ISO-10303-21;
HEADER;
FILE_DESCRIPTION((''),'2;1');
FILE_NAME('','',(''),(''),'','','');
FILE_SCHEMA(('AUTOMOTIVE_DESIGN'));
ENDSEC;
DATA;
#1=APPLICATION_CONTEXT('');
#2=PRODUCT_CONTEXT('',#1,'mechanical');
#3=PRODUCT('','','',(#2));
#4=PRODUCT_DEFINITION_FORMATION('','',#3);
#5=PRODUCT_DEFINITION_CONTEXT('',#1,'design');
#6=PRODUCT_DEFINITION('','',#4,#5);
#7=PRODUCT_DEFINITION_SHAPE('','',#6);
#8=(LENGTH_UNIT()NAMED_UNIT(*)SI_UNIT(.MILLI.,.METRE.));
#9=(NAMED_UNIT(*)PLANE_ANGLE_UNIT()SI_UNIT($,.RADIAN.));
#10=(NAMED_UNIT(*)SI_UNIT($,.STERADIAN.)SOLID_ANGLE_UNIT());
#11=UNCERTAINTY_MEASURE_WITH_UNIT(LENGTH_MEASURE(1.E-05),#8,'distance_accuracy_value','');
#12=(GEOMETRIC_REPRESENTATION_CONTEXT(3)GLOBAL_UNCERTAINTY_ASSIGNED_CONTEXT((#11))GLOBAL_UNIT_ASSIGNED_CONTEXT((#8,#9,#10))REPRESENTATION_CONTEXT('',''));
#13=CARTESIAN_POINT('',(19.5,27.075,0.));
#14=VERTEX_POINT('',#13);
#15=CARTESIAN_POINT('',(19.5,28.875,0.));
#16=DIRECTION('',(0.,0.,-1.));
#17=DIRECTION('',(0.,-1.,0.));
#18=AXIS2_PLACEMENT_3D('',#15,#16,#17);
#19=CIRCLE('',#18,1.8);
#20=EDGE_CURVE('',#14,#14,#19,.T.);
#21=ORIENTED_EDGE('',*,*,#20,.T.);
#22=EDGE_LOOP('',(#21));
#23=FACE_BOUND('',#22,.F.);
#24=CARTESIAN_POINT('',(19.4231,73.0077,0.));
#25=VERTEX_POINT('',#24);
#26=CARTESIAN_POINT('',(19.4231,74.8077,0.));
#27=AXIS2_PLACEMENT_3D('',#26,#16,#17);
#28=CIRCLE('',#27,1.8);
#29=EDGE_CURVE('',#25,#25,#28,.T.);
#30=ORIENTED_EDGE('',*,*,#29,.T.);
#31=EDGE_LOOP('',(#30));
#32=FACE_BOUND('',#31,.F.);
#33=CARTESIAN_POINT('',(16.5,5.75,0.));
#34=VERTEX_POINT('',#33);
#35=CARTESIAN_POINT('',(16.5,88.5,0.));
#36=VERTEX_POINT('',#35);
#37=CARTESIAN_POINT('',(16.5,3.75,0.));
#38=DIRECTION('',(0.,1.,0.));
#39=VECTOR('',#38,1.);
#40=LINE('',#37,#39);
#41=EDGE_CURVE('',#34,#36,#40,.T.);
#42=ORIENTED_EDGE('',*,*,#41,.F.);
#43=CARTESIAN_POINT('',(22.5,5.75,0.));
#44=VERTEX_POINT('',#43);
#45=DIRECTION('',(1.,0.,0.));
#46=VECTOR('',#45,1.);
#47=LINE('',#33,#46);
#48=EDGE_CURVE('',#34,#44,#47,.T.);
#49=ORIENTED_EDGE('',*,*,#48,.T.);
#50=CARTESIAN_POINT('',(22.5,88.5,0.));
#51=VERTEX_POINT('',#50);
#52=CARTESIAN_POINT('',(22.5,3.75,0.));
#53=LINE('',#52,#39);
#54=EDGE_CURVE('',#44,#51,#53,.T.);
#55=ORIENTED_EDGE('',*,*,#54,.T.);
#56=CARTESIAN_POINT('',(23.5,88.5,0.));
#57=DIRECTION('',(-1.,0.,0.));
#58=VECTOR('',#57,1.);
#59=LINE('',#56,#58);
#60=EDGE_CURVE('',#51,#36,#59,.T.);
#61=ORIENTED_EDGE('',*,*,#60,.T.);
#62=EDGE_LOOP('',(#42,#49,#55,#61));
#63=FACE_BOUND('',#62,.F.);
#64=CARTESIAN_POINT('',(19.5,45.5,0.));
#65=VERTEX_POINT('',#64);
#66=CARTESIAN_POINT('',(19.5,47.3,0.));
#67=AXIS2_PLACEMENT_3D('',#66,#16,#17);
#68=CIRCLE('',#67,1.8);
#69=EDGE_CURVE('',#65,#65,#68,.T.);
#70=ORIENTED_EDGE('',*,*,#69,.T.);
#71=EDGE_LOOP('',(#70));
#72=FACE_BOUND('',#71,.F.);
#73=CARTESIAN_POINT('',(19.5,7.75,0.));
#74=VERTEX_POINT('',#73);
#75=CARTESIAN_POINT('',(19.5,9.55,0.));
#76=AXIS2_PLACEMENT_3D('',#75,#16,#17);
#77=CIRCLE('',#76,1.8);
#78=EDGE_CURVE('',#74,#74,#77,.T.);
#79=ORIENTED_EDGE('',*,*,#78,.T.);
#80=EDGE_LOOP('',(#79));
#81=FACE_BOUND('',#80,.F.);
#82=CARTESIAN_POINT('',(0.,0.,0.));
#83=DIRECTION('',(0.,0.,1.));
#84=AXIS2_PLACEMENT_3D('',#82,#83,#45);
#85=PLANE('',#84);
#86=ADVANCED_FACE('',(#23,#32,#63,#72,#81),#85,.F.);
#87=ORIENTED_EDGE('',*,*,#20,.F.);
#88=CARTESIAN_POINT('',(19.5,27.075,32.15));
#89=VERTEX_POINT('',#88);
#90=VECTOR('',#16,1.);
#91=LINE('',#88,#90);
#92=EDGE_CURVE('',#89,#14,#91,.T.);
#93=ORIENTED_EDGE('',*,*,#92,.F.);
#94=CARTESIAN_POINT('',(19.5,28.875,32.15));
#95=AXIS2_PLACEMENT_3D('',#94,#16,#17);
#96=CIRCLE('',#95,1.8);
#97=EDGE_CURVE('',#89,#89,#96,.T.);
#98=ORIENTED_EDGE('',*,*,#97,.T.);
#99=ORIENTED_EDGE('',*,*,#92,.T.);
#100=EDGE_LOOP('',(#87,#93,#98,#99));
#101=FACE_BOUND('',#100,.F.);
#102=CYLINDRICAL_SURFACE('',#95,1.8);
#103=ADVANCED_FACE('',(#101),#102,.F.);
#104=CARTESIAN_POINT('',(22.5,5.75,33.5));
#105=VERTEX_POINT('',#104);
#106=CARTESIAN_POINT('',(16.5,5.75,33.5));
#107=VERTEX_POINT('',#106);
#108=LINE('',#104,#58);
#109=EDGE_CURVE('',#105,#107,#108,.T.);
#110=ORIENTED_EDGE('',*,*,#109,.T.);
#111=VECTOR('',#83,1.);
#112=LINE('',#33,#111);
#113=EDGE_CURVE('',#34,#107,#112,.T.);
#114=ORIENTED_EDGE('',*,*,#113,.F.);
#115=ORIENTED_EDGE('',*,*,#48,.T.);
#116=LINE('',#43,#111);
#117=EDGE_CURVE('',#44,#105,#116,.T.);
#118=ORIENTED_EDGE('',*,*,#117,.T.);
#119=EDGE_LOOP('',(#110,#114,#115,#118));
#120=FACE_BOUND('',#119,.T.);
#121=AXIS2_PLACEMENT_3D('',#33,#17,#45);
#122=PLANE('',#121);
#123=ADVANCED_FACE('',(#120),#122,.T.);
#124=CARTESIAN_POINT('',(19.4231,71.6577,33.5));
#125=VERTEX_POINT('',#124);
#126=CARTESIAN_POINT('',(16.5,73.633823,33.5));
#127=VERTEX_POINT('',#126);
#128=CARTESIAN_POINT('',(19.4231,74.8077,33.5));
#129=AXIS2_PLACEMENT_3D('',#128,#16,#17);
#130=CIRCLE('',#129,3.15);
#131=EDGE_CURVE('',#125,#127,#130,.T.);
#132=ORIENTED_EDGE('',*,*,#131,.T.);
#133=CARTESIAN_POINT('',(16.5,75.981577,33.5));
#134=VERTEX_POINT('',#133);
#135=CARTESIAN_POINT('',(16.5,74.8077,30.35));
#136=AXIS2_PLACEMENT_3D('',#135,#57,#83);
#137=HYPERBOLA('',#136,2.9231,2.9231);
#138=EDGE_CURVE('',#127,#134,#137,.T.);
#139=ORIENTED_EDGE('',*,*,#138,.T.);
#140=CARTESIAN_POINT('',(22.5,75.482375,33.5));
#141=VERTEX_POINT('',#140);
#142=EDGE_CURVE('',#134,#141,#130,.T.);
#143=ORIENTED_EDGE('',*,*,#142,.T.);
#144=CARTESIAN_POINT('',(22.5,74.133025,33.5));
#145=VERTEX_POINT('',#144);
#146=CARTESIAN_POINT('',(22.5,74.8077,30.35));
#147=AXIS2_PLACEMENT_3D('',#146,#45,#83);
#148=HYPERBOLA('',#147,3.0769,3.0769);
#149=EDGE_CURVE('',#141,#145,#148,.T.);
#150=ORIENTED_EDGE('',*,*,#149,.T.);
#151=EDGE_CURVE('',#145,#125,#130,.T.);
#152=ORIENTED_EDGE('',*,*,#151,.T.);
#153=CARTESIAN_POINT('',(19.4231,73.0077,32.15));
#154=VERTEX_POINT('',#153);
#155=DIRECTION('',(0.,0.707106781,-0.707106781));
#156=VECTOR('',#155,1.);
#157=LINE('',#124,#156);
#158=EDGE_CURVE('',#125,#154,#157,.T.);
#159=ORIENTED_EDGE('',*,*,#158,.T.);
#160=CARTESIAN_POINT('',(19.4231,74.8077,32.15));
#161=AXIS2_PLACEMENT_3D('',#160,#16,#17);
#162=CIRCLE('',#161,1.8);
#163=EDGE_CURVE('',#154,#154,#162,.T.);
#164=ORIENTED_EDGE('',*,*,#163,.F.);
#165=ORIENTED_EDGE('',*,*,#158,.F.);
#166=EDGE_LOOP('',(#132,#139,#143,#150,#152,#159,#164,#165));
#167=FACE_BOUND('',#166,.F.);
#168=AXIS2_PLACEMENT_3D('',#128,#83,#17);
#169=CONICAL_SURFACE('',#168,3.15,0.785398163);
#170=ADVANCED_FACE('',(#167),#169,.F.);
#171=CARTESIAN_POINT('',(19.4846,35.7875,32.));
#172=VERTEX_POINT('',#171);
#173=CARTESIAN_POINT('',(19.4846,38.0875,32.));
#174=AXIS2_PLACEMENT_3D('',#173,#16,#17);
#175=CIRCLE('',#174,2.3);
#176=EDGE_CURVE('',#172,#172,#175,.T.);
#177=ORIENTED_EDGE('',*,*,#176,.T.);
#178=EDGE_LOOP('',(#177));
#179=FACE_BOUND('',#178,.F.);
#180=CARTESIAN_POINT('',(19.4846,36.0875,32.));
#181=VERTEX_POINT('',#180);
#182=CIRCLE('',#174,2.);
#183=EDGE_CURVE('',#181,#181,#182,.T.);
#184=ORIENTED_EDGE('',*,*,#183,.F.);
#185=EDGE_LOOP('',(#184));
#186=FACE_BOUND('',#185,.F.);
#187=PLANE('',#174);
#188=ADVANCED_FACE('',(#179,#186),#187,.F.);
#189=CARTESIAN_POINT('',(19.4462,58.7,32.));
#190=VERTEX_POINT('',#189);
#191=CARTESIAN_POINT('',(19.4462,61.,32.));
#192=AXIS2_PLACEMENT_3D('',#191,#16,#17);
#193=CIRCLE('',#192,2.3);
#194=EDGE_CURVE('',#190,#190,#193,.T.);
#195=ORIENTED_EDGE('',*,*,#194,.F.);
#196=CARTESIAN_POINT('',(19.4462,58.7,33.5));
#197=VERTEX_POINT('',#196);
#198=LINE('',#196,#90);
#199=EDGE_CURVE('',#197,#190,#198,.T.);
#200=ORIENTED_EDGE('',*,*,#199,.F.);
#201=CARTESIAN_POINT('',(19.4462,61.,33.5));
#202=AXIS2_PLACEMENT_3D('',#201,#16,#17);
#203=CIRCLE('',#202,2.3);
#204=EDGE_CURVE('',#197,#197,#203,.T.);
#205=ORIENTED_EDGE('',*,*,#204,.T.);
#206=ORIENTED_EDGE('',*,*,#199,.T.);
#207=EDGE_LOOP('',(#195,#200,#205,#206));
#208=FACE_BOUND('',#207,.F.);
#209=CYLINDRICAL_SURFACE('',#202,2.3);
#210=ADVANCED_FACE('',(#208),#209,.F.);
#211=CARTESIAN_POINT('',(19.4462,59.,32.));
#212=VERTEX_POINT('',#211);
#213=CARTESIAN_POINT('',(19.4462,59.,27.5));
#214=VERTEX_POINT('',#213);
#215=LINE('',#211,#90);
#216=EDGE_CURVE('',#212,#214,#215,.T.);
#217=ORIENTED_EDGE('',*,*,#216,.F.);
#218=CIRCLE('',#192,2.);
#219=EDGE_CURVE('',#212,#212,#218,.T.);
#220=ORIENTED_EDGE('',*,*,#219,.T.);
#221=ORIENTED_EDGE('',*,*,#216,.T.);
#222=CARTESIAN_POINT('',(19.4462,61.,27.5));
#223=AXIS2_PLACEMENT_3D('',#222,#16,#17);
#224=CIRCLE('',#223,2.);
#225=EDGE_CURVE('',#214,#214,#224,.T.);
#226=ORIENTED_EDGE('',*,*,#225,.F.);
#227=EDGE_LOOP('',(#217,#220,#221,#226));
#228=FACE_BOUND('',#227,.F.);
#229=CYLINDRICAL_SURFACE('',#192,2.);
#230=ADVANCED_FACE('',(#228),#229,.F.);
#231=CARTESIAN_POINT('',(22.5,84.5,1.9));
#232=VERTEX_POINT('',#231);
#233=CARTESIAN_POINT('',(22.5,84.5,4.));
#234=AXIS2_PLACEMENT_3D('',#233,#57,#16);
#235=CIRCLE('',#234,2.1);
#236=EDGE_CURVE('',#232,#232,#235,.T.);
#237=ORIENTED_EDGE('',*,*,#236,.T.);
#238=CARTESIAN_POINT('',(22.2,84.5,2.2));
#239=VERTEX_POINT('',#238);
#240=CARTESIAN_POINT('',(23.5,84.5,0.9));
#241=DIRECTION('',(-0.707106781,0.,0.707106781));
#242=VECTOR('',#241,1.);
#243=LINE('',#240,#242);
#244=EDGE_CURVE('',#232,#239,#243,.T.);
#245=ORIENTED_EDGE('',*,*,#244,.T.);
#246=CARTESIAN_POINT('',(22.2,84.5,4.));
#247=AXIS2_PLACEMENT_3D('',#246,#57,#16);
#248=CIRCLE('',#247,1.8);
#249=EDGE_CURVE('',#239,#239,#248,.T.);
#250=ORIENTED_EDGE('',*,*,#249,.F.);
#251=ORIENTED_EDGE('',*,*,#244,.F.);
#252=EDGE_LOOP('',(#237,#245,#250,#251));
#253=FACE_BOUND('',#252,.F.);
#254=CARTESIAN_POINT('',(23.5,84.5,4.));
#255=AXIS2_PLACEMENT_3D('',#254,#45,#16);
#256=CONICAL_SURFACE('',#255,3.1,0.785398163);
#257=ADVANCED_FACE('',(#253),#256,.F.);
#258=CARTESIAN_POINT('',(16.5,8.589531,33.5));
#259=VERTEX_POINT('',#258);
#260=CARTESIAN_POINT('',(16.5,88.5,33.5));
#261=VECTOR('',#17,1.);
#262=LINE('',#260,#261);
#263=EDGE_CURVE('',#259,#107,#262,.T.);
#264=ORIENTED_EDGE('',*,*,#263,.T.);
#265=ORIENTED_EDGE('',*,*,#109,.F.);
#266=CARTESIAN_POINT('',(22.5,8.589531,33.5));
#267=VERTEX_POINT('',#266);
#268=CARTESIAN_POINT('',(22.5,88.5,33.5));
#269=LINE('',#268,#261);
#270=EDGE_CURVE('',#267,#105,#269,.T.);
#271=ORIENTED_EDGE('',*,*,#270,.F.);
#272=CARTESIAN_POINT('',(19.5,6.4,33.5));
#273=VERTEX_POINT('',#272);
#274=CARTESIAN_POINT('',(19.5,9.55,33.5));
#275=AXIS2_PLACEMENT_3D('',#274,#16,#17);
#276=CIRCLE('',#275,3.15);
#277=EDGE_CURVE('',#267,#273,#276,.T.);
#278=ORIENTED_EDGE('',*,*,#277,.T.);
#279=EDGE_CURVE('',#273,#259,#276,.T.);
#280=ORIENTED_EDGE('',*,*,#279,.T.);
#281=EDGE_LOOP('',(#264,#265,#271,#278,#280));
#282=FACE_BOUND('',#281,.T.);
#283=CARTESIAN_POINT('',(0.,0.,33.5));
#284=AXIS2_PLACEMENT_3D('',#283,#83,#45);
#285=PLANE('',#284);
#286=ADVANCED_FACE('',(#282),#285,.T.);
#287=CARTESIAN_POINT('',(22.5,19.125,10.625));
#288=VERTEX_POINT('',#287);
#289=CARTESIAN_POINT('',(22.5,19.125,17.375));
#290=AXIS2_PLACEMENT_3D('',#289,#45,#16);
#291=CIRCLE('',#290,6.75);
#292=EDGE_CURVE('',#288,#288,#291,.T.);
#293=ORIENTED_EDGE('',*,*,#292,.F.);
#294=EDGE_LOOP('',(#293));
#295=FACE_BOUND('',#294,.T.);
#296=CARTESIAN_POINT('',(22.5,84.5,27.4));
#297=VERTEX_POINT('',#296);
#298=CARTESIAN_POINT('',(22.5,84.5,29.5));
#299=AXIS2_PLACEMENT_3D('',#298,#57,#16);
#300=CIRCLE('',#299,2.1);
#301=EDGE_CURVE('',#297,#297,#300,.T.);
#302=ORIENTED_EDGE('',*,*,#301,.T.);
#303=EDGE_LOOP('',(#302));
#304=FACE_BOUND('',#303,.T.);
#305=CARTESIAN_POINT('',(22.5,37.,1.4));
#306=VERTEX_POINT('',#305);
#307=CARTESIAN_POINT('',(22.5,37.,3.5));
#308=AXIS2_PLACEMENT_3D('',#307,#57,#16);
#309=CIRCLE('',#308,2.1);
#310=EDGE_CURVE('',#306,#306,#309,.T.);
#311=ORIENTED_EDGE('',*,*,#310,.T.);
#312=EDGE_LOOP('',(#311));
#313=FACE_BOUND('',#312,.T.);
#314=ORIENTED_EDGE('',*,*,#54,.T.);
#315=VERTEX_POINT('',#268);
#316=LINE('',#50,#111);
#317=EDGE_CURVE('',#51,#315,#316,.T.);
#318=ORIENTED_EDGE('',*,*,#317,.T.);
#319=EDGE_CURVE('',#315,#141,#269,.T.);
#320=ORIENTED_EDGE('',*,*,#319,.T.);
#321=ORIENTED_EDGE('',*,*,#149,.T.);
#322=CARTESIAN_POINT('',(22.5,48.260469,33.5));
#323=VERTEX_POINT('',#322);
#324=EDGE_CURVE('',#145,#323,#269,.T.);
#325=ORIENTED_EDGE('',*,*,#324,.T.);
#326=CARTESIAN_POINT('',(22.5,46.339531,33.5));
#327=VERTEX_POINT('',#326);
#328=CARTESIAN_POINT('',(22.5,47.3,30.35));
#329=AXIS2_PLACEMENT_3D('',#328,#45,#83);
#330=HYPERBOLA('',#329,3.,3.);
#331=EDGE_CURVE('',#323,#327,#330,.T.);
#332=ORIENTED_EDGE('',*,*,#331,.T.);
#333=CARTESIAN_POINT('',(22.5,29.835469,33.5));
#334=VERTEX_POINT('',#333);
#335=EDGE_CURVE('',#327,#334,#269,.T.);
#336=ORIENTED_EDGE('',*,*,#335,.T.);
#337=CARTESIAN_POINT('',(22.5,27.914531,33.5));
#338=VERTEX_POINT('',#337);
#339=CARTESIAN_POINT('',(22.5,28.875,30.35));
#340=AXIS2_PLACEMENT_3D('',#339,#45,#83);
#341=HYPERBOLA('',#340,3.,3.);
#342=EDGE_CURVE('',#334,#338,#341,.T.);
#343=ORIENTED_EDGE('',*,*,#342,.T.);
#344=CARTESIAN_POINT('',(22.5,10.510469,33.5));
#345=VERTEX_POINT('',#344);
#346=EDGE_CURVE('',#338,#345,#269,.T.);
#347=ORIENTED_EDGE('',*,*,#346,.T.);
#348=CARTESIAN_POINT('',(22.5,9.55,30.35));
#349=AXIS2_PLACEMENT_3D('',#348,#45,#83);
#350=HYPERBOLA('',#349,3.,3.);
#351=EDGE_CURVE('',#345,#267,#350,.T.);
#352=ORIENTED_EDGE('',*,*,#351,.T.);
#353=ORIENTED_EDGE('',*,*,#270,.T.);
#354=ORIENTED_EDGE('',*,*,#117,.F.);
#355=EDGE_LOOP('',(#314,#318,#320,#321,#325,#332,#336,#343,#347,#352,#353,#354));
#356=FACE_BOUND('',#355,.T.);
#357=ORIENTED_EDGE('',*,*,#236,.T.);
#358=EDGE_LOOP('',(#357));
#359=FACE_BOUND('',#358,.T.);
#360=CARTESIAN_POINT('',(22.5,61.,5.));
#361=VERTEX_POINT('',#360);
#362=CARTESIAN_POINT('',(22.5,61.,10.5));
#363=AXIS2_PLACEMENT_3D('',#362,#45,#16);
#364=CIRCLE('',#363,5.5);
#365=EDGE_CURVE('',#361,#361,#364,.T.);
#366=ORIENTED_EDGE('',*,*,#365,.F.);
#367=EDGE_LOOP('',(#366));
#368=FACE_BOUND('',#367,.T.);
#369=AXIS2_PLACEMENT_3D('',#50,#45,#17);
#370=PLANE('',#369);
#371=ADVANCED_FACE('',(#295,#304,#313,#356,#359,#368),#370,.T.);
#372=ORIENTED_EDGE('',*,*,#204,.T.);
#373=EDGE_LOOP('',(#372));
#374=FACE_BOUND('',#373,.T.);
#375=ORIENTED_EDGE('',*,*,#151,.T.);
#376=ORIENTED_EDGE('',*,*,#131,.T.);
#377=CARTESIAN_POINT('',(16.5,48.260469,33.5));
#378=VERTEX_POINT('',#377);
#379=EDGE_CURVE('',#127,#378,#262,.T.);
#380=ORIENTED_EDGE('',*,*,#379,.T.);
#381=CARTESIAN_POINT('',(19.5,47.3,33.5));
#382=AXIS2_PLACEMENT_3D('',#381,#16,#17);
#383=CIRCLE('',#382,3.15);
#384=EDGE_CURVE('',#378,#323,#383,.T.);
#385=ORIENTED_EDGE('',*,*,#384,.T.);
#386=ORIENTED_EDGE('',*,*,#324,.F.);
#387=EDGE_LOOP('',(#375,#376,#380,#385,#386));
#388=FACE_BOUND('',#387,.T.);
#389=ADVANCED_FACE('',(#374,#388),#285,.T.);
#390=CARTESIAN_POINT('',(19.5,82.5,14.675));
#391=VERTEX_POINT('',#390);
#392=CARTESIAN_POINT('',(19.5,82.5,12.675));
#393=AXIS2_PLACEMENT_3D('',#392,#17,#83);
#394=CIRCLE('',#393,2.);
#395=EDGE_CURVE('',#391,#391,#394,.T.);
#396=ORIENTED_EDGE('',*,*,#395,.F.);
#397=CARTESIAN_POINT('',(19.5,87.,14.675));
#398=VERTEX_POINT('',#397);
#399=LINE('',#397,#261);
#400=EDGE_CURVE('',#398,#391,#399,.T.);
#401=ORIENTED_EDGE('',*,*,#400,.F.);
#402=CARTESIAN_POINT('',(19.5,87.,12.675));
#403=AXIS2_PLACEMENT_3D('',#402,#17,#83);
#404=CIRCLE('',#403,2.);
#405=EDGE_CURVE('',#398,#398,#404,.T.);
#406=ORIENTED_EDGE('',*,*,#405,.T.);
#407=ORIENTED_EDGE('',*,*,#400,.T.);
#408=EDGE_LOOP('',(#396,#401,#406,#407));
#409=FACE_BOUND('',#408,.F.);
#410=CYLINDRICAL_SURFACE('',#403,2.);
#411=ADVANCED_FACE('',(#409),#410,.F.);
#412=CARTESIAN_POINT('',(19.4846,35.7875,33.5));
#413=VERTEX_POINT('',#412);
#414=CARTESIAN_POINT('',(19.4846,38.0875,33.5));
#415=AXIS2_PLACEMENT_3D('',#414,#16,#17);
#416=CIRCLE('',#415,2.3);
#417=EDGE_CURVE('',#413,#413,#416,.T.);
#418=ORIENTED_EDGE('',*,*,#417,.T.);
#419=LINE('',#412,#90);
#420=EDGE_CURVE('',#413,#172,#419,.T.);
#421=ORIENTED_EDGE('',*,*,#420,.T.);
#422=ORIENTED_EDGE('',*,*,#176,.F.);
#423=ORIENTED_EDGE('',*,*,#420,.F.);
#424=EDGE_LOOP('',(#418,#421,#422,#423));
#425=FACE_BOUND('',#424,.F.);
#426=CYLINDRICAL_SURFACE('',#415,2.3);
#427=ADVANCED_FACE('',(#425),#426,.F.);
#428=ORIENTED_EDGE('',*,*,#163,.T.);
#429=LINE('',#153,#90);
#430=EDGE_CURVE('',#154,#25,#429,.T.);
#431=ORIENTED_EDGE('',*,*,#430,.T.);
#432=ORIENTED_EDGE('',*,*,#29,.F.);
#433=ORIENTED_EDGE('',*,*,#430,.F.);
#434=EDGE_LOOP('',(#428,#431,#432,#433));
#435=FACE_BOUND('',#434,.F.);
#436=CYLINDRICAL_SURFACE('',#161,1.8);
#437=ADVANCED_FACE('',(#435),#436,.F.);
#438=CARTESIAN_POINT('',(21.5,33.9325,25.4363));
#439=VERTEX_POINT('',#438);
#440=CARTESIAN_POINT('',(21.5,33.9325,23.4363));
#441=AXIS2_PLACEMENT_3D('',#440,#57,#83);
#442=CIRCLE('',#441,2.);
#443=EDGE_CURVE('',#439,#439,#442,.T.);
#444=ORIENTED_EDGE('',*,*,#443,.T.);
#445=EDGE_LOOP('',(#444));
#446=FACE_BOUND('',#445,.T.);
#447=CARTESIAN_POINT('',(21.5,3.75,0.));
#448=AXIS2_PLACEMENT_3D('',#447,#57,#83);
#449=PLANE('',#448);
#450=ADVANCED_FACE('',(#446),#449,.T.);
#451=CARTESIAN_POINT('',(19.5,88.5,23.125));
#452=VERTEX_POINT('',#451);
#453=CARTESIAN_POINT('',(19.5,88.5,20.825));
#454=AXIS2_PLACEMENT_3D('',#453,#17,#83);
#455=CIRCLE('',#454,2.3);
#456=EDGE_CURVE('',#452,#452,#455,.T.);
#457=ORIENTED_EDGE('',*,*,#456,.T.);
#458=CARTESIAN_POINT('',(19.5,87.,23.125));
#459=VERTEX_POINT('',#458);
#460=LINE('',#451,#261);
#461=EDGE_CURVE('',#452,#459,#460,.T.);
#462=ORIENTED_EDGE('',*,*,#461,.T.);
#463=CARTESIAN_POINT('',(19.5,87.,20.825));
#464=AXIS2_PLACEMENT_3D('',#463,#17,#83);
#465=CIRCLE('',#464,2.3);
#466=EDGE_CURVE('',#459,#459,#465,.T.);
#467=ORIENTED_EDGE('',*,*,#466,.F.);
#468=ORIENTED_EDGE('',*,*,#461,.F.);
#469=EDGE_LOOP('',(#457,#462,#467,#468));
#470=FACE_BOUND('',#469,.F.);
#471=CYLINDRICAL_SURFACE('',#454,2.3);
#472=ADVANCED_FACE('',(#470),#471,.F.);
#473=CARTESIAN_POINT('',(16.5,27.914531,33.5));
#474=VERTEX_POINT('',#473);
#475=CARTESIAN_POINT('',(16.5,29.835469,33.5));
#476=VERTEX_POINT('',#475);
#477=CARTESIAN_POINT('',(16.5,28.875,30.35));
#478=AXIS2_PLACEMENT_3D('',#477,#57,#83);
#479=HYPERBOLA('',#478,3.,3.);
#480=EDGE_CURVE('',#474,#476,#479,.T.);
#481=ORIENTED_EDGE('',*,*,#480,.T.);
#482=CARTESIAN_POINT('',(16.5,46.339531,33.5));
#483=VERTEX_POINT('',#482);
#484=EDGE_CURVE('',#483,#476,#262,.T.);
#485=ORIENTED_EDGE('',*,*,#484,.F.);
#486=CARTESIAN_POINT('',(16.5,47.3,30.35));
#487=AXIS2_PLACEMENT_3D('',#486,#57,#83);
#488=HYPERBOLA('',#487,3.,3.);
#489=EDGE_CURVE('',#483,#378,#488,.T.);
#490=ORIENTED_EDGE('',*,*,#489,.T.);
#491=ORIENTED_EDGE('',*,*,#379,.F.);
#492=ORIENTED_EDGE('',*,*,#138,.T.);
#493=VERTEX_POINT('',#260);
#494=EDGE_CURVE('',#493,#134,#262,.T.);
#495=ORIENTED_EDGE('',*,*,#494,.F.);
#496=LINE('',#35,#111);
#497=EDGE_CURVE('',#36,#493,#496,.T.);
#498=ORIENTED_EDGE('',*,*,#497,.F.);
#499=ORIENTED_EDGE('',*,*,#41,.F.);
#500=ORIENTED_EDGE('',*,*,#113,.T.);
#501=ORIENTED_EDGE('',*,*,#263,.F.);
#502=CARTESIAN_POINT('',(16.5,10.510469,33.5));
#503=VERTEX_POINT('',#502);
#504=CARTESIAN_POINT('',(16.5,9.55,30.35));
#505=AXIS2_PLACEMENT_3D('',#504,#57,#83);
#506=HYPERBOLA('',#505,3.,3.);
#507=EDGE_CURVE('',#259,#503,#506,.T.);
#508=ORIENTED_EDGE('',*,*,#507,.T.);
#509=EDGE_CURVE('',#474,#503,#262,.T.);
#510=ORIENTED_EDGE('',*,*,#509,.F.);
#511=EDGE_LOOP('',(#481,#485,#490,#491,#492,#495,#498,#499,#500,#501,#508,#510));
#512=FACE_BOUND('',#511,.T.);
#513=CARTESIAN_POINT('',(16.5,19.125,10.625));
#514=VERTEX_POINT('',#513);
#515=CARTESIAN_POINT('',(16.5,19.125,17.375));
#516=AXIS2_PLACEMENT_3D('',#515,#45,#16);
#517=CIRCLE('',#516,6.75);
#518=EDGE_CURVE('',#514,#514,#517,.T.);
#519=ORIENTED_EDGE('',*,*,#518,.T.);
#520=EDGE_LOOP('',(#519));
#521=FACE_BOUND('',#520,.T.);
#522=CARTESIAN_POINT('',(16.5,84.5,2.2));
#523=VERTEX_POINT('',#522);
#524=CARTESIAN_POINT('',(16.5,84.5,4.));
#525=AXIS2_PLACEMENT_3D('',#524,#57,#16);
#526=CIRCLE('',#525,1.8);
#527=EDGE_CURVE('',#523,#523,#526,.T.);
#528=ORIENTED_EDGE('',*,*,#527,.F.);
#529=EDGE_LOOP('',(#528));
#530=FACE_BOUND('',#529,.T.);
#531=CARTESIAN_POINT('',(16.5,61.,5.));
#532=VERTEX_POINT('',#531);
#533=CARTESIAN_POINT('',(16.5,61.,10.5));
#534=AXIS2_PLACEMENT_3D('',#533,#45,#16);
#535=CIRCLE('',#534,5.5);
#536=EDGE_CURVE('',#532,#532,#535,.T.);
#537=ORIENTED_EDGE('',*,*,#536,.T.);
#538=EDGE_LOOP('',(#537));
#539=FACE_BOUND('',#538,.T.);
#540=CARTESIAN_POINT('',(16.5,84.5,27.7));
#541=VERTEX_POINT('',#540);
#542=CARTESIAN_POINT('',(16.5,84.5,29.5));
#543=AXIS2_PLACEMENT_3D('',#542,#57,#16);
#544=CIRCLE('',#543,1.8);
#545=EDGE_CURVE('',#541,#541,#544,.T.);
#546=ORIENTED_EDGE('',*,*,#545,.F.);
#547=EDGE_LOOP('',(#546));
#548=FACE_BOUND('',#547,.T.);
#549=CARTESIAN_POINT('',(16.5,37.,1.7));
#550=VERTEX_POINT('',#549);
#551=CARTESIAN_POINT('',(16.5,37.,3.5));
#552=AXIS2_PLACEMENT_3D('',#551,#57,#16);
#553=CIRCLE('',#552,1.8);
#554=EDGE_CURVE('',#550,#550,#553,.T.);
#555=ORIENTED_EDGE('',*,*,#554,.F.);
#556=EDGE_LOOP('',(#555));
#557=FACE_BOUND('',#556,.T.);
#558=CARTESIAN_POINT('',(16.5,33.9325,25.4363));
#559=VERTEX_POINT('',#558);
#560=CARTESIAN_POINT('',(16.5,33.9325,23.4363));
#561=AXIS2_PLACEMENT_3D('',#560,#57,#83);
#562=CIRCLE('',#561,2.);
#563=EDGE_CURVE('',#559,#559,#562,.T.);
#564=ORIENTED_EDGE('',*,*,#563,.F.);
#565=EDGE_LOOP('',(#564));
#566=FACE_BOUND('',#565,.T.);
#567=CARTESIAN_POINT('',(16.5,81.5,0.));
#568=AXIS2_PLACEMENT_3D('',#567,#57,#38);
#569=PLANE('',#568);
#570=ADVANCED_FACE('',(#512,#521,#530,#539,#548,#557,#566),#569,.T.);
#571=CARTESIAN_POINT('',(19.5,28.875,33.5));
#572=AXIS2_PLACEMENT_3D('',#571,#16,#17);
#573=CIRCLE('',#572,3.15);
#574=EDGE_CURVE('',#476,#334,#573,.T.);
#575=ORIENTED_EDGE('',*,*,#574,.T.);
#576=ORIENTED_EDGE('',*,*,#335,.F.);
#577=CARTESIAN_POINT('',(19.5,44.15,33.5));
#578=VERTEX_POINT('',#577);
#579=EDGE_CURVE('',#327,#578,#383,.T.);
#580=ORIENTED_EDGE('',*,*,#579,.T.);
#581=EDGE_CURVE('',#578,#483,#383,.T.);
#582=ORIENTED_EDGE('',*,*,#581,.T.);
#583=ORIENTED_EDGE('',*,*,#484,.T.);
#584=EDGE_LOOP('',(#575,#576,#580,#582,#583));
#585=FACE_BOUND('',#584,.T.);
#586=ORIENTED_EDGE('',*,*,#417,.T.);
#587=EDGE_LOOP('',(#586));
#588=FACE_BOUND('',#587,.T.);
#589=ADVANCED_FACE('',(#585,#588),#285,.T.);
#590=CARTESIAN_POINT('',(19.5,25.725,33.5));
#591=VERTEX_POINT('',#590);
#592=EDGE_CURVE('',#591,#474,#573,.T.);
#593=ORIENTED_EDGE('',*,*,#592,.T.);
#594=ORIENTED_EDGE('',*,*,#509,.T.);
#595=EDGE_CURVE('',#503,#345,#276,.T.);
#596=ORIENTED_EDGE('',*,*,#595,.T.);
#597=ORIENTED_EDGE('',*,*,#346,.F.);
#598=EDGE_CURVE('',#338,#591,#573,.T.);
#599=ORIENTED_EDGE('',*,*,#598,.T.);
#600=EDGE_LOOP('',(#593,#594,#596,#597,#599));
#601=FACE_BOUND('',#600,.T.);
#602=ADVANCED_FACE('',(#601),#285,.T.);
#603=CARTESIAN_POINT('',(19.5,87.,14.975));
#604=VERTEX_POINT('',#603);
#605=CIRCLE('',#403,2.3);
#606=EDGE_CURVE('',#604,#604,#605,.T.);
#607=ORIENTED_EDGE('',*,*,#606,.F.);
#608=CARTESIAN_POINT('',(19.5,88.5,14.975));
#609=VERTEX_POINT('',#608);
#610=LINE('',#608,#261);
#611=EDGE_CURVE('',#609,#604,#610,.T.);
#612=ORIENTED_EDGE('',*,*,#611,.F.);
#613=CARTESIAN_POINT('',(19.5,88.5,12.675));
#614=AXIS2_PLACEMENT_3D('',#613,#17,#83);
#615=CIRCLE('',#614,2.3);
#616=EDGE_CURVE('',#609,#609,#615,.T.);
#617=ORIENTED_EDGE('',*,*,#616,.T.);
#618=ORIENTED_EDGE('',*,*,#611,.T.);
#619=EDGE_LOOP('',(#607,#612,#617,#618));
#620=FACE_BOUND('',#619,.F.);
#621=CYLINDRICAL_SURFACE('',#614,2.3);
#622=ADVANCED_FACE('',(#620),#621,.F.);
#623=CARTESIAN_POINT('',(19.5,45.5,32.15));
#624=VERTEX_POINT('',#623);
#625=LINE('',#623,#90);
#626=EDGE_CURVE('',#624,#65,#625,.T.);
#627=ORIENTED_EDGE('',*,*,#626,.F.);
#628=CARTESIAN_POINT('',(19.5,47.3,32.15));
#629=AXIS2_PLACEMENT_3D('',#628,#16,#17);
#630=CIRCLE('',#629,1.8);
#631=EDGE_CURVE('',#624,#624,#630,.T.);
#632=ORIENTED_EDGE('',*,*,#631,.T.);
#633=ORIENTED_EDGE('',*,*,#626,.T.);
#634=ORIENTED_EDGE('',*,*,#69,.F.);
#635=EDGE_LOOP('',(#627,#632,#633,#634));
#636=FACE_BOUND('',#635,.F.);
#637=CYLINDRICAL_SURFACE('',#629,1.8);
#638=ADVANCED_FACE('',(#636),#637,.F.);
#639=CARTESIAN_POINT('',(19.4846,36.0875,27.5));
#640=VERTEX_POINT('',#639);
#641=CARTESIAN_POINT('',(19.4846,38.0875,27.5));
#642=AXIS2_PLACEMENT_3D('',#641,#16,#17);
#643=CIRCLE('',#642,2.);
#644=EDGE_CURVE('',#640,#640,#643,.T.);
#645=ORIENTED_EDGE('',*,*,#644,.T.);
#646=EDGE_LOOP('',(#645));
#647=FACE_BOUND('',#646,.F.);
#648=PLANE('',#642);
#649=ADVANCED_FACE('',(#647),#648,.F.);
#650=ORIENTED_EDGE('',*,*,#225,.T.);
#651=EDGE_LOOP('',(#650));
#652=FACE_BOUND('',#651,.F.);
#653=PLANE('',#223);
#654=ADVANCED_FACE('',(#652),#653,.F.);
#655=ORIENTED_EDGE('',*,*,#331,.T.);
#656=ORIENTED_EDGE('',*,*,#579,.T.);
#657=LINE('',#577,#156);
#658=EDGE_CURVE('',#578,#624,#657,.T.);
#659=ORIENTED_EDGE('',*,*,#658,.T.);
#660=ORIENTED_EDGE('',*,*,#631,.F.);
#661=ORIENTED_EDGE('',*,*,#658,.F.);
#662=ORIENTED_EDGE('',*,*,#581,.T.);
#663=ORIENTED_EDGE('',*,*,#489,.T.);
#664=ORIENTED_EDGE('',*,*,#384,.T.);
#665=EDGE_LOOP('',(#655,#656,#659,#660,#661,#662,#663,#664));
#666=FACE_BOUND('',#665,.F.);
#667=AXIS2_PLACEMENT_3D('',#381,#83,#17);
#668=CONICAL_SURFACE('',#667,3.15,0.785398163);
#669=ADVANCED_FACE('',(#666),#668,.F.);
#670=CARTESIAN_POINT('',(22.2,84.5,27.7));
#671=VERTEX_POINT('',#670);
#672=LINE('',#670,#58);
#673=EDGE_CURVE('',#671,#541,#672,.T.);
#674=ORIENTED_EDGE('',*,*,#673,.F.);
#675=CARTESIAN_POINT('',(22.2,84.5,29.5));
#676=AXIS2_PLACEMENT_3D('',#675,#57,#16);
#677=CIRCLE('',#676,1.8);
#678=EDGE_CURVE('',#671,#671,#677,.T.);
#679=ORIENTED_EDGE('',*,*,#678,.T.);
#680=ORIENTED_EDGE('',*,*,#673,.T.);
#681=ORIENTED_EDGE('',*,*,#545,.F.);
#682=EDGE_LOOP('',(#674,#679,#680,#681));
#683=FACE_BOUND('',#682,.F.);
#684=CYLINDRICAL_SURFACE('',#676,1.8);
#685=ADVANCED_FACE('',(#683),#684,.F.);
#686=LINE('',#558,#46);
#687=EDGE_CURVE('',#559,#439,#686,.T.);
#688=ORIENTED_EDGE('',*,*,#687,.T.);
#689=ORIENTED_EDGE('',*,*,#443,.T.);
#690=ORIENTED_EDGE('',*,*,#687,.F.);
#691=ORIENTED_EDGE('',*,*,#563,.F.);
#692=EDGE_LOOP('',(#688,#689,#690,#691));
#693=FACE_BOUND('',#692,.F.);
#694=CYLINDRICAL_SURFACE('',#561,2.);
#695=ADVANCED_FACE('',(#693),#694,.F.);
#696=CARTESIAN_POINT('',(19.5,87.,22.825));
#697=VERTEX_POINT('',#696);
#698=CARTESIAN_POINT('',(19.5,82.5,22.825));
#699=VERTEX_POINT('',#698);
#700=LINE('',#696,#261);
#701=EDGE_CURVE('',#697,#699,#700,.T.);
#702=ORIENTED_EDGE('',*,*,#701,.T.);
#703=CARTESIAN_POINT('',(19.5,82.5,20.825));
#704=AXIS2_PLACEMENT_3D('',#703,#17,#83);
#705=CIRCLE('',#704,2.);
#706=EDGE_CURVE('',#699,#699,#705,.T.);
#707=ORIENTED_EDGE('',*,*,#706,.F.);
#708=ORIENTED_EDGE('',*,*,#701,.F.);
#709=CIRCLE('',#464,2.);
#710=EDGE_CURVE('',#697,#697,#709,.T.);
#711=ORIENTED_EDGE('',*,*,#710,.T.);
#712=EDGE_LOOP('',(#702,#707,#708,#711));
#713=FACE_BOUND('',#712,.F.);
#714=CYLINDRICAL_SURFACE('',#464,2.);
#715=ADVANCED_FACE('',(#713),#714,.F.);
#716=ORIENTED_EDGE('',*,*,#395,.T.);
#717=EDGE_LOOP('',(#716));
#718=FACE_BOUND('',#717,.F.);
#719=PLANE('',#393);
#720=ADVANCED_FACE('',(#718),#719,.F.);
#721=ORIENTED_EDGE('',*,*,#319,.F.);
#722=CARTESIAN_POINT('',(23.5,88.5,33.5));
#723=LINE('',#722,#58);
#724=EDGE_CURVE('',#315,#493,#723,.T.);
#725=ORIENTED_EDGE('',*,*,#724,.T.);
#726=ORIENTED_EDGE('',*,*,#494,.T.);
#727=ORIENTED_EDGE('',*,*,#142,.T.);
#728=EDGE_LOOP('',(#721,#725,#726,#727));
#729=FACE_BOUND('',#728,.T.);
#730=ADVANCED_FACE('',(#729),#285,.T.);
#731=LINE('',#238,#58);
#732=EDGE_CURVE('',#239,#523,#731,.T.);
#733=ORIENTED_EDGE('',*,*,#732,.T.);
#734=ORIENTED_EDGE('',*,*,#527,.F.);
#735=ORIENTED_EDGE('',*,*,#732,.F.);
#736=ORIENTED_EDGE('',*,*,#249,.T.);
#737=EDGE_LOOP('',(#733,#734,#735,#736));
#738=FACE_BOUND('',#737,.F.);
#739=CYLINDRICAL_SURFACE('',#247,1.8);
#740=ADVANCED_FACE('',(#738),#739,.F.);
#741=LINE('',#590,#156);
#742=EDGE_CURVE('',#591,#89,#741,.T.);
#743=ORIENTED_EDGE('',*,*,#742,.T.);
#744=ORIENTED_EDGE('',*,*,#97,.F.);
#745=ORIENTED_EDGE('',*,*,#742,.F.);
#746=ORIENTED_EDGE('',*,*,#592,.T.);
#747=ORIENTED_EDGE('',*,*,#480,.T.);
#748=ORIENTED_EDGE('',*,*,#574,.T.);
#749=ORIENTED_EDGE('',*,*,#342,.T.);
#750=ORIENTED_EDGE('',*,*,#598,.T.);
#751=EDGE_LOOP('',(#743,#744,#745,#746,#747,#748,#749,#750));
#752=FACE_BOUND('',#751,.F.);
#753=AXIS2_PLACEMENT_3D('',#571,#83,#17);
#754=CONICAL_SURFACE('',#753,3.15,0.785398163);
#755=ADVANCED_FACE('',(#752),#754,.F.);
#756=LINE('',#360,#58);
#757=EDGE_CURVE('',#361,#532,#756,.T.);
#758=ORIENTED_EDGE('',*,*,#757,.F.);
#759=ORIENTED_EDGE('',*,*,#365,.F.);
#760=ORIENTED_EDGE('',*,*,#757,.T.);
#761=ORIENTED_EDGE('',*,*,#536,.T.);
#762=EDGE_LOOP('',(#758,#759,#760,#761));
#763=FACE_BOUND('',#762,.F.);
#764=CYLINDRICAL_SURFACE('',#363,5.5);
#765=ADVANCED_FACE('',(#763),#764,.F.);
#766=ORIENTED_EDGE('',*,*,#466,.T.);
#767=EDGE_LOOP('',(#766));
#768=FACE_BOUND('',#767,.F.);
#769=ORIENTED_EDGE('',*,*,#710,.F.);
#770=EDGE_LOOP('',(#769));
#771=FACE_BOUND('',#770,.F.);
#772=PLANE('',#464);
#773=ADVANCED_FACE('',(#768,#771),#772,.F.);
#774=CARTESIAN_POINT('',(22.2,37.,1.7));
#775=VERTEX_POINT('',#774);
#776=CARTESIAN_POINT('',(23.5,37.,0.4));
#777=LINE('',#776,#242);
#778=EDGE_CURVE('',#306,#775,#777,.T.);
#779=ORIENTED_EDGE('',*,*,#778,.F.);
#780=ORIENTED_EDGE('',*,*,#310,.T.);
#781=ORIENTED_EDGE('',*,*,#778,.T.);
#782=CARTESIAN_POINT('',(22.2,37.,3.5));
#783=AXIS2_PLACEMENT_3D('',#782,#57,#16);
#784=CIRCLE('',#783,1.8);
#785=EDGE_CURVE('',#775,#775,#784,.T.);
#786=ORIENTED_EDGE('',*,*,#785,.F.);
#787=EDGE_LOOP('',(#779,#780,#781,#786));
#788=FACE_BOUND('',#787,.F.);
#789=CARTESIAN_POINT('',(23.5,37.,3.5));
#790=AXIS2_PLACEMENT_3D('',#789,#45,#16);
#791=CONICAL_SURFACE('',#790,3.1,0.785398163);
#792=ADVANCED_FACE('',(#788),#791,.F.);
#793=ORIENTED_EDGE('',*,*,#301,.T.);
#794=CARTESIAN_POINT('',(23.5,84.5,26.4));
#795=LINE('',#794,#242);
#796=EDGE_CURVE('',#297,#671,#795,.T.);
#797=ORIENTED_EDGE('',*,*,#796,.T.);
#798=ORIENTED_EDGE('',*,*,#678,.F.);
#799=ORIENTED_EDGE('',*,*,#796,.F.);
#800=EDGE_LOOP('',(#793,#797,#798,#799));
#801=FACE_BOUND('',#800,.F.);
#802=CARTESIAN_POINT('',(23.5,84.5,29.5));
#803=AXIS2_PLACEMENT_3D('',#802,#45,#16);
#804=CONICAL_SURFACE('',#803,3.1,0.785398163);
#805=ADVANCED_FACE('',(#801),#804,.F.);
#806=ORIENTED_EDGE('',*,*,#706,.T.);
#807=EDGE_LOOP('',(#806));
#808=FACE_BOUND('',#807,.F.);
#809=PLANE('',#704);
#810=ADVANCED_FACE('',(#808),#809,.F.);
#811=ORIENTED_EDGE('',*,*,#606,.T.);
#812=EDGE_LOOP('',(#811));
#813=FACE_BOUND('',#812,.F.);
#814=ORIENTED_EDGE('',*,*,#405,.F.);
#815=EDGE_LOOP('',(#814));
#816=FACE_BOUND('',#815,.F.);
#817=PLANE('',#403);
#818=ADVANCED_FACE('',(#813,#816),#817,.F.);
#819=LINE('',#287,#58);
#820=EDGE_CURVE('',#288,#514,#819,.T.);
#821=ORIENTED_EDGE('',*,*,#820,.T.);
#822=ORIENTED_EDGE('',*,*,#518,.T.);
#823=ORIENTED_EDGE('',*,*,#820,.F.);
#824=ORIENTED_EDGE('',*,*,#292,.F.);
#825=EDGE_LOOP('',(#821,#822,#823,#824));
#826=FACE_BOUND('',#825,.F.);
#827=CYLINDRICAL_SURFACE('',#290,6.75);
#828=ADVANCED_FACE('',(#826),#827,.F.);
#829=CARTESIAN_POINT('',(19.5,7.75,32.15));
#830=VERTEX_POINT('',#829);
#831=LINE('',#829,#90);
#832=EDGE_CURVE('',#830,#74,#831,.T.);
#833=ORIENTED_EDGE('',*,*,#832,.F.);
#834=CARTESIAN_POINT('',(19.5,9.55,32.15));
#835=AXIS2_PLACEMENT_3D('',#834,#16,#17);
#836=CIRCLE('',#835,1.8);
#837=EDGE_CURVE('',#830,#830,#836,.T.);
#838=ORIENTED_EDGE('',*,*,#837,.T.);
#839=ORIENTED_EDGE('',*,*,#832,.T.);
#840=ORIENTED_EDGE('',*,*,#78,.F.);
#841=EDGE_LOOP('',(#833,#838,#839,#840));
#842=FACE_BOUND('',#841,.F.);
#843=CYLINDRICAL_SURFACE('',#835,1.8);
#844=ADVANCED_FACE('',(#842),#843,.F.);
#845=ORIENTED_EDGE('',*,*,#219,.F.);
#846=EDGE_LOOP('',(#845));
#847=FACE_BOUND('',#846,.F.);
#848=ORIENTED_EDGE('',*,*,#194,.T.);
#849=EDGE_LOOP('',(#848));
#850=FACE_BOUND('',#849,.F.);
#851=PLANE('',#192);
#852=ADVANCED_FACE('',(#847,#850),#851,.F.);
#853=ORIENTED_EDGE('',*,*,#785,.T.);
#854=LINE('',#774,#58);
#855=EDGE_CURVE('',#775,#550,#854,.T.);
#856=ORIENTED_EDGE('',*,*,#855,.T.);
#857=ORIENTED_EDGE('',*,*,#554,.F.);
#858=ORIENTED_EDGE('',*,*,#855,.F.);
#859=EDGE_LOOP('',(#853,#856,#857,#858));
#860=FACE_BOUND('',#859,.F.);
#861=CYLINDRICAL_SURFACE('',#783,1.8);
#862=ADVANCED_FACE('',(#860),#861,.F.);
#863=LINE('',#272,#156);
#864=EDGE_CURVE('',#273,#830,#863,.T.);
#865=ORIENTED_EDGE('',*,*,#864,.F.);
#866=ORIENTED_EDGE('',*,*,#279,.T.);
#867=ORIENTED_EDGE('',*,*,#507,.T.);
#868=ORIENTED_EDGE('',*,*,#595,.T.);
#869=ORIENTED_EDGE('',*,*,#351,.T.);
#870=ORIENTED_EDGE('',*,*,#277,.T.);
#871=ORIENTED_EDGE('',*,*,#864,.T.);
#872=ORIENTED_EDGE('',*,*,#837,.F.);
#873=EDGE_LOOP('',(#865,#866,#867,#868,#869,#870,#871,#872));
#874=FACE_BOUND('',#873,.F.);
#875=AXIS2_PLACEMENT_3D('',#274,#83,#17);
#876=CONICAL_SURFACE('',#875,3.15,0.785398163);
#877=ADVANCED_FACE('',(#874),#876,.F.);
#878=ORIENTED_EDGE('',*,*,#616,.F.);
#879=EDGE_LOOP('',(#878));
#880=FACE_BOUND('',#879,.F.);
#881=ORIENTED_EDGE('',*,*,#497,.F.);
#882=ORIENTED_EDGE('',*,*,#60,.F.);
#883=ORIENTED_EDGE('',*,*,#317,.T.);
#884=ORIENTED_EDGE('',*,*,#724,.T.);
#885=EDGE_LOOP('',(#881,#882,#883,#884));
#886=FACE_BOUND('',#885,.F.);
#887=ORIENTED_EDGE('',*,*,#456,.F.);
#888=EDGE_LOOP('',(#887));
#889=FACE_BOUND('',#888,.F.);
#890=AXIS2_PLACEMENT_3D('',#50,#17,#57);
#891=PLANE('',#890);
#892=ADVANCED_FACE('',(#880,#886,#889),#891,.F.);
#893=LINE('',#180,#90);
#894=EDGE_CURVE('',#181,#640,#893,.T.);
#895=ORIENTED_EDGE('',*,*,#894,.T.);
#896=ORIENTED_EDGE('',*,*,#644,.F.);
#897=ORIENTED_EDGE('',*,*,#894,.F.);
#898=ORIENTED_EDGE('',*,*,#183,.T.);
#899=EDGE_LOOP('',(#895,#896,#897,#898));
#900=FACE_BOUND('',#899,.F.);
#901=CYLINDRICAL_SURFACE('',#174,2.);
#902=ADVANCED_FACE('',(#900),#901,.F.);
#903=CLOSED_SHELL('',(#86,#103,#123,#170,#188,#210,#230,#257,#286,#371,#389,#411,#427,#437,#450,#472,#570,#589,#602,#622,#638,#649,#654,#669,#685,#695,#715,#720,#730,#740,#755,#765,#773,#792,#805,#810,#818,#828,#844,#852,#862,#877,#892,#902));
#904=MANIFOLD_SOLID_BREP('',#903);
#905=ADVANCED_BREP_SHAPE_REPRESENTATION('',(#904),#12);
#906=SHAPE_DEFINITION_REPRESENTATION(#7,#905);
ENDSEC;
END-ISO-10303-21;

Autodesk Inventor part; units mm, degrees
ref_plane "YZ Plane" through (0, 0, 0) normal (1, 0, 0) x (0, 1, 0)
ref_plane "XZ Plane" through (0, 0, 0) normal (0, 1, 0) x (-1, 0, 0)
ref_plane "Work Plane1" through (0, 0, 0) normal (0, 0, 1) x (1, 0, 0)
sketch "Sketch1" plane through (0, 0, 0) normal (0, 0, 1) x (1, 0, 0)
  line L0 (23.5, 88.5) -> (-23.5, 88.5) projected
  line L1 (-23.5, 88.5) -> (-23.5, 36.5) projected
  line L2 (-26.5, 33.5) -> (-89, 33.5) projected
  line L3 (-89, 33.5) -> (-89, -72.5) projected
  line L4 (-89, -72.5) -> (-77, -72.5) projected
  line L5 (-74, -75.5) -> (-74, -93.5) projected
  line L6 (-74, -93.5) -> (74, -93.5) projected
  line L7 (74, -93.5) -> (74, -75.5) projected
  line L8 (77, -72.5) -> (89, -72.5) projected
  line L9 (89, -72.5) -> (89, 33.5) projected
  line L10 (89, 33.5) -> (26.5, 33.5) projected
  line L11 (23.5, 36.5) -> (23.5, 88.5) projected
  line L12 (-4.5, 81.5) -> (-4.5, 36.5) projected
  line L13 (-7.5, 33.5) -> (-13.5, 33.5) projected
  line L14 (-16.5, 36.5) -> (-16.5, 81.5) projected
  line L15 (7.5, 84.5) -> (13.5, 84.5) projected
  line L16 (16.5, 81.5) -> (16.5, 36.5) projected
  line L17 (13.5, 33.5) -> (7.5, 33.5) projected
  line L18 (4.5, 36.5) -> (4.5, 81.5) projected
  line L19 (-13.5, 84.5) -> (-7.5, 84.5) projected
  line L20 (16.5, 88.5) -> (22.5, 88.5)
  line L21 (22.5, 88.5) -> (22.5, 3.75)
  line L22 (22.5, 3.75) -> (16.5, 3.75)
  line L23 (16.5, 3.75) -> (16.5, 88.5)
  line L24 (59.9, 4.75) -> (32.2, 4.75)
  arc A0 (13.5, 33.5) -> (16.5, 36.5) centre (13.5, 36.5) ccw projected
  arc A1 (4.5, 36.5) -> (7.5, 33.5) centre (7.5, 36.5) ccw projected
  arc A2 (7.5, 84.5) -> (4.5, 81.5) centre (7.5, 81.5) ccw projected
  arc A3 (16.5, 81.5) -> (13.5, 84.5) centre (13.5, 81.5) ccw projected
  arc A4 (-4.5, 81.5) -> (-7.5, 84.5) centre (-7.5, 81.5) ccw projected
  arc A5 (-7.5, 33.5) -> (-4.5, 36.5) centre (-7.5, 36.5) ccw projected
  arc A6 (-16.5, 36.5) -> (-13.5, 33.5) centre (-13.5, 36.5) ccw projected
  arc A7 (-13.5, 84.5) -> (-16.5, 81.5) centre (-13.5, 81.5) ccw projected
  arc A8 (-26.5, 33.5) -> (-23.5, 36.5) centre (-26.5, 36.5) ccw projected
  arc A9 (-74, -75.5) -> (-77, -72.5) centre (-77, -75.5) ccw projected
  arc A10 (77, -72.5) -> (74, -75.5) centre (77, -75.5) ccw projected
  arc A11 (23.5, 36.5) -> (26.5, 33.5) centre (26.5, 36.5) ccw projected
  circle A12 centre (39.125, 25.9125) radius 1.0065 projected
  circle A13 centre (72.95, 12.275) radius 1.0065 projected
  circle A14 centre (-39.125, 12.3375) radius 1.0065 projected
  circle A15 centre (-72.95, 25.975) radius 1.0065 projected
  circle A16 centre (-72.95, 12.275) radius 1.0065 projected
  circle A17 centre (-39.125, 25.9125) radius 1.0065 projected
  circle A18 centre (72.95, 25.975) radius 1.0065 projected
  circle A19 centre (39.125, 12.3375) radius 1.0065 projected
  circle A20 centre (-42.4984, -44.6666) radius 1.2295 projected
  circle A21 centre (-79, -42.3889) radius 1.2295 projected
  circle A22 centre (-19.5, 28.875) radius 1.2295 projected
  circle A23 centre (19.5, 9.55) radius 1.2295 projected
  circle A24 centre (19.5, 47.3) radius 1.2295 projected
  circle A25 centre (-19.5, 47.3) radius 1.2295 projected
  circle A26 centre (0, 74.7) radius 1.2295 projected
  circle A27 centre (-19.4231, 74.8077) radius 1.2295 projected
  circle A28 centre (19.5, 74.7) radius 1.2295 projected
  circle A29 centre (0, 49.05) radius 1.2295 projected
  circle A30 centre (19.5, 28.875) radius 1.2295 projected
  circle A31 centre (0, 19.125) radius 1.2295 projected
  circle A32 centre (-19.5, 9.55) radius 1.2295 projected
  circle A33 centre (42.5, -44.6649) radius 1.2295 projected
  circle A34 centre (79, -42.3889) radius 1.2295 projected
  circle A35 centre (21.5, -85.5) radius 1.8 projected
  circle A36 centre (-64.5, -85.5) radius 1.8 projected
  circle A37 centre (-21.5, -85.5) radius 1.8 projected
  circle A38 centre (64.5, -85.5) radius 1.8 projected
  line L25 (-57, -78.5) -> (-82, -60.2553) projected
  line L26 (-82, -60.2553) -> (-82, -45.3889) projected
  line L27 (-76, -45.3889) -> (-45.4984, -47.6666) projected
  line L28 (-21.1, -27.9) -> (-21.1, -21.9) projected
  line L29 (-45.4984, -41.6666) -> (-76, -39.3889) projected
  line L30 (-82, -39.3889) -> (-82, 4.75) projected
  line L31 (30.3333, 4.75) -> (82, 4.75) projected
  line L32 (82, 4.75) -> (82, -39.3889) projected
  line L33 (76, -39.3889) -> (45.5, -41.6649) projected
  line L34 (21.1, -21.9) -> (21.1, -27.9) projected
  line L35 (45.5, -47.6649) -> (76, -45.3889) projected
  line L36 (82, -45.3889) -> (82, -60.2553) projected
  line L37 (82, -60.2553) -> (57, -78.5) projected
  line L38 (57, -78.5) -> (57, -87.5) projected
  arc A39 (55, -89.5) -> (57, -87.5) centre (55, -87.5) ccw projected
  line L39 (55, -89.5) -> (31, -89.5) projected
  arc A40 (29, -87.5) -> (31, -89.5) centre (31, -87.5) ccw projected
  line L40 (29, -87.5) -> (29, -78.5) projected
  line L41 (14, -78.5) -> (14, -87.5) projected
  arc A41 (12, -89.5) -> (14, -87.5) centre (12, -87.5) ccw projected
  line L42 (12, -89.5) -> (-12, -89.5) projected
  arc A42 (-14, -87.5) -> (-12, -89.5) centre (-12, -87.5) ccw projected
  line L43 (-14, -87.5) -> (-14, -78.5) projected
  line L44 (-29, -78.5) -> (-29, -87.5) projected
  arc A43 (-31, -89.5) -> (-29, -87.5) centre (-31, -87.5) ccw projected
  line L45 (-31, -89.5) -> (-55, -89.5) projected
  arc A44 (-57, -87.5) -> (-55, -89.5) centre (-55, -87.5) ccw projected
  line L46 (-57, -87.5) -> (-57, -78.5) projected
  line L47 (-69.95, 28.9125) -> (-42.125, 28.9125) projected
  line L48 (-42.125, 28.9125) -> (-42.125, 9.275) projected
  line L49 (-42.125, 9.275) -> (-69.95, 9.275) projected
  line L50 (-69.95, 9.275) -> (-69.95, 28.9125) projected
  line L51 (-16.5, 9.75) -> (-16.5, 28.5) projected
  line L52 (-16.5, 28.5) -> (-4.5, 28.5) projected
  line L53 (-4.5, 28.5) -> (-4.5, 9.75) projected
  line L54 (-4.5, 9.75) -> (-16.5, 9.75) projected
  line L55 (69.95, 9.3375) -> (42.125, 9.3375) projected
  line L56 (42.125, 9.3375) -> (42.125, 28.975) projected
  line L57 (42.125, 28.975) -> (69.95, 28.975) projected
  line L58 (69.95, 28.975) -> (69.95, 9.3375) projected
  line L59 (4.5, 9.75) -> (4.5, 28.5) projected
  line L60 (4.5, 28.5) -> (16.5, 28.5) projected
  line L61 (16.5, 28.5) -> (16.5, 9.75) projected
  line L62 (16.5, 9.75) -> (4.5, 9.75) projected
  line L63 (45.5, -41.6649) -> (27.1, -21.9) projected
  line L64 (27.1, -21.9) -> (30.3333, 4.75) projected
  line L65 (-45.4984, -47.6666) -> (-29, -78.5) projected
  line L66 (-82, 4.75) -> (-30.3333, 4.75) projected
  line L67 (-30.3333, 4.75) -> (-27.1, -21.9) projected
  line L68 (-27.1, -21.9) -> (-45.4984, -41.6666) projected
  line L69 (29, -78.5) -> (45.5, -47.6649) projected
  line L70 (-14, -78.5) -> (-39, -45.3279) projected
  line L71 (-39, -44.2124) -> (-21.1, -27.9) projected
  line L72 (-21.1, -21.9) -> (-24.3333, 4.75) projected
  line L73 (-24.3333, 4.75) -> (24.3333, 4.75) projected
  line L74 (24.3333, 4.75) -> (21.1, -21.9) projected
  line L75 (21.1, -27.9) -> (39.5, -44.6649) projected
  line L76 (39.5, -44.6649) -> (14, -78.5) projected
  circle A45 centre (-78, -67.1725) radius 1.2295 projected
  circle A46 centre (78, -67.1725) radius 1.2295 projected
  line L77 (-22.5, 28.9125) -> (-22.5, 9.55) projected
  line L78 (-22.5, 9.55) -> (-36.125, 9.55) projected
  line L79 (-36.125, 9.55) -> (-36.125, 28.9125) projected
  line L80 (-36.125, 28.9125) -> (-22.5, 28.9125) projected
  line L81 (76, -45.3889) -> (82, -45.3889) projected
  line L82 (82, -39.3889) -> (76, -39.3889) projected
  line L83 (36.125, 9.275) -> (22.5, 9.275) projected
  line L84 (22.5, 9.275) -> (22.5, 28.9125) projected
  line L85 (22.5, 28.9125) -> (36.125, 28.9125) projected
  line L86 (36.125, 28.9125) -> (36.125, 9.275) projected
  line L87 (-86, 28.975) -> (-75.95, 28.975) projected
  line L88 (-75.95, 28.975) -> (-75.95, 9.275) projected
  line L89 (-75.95, 9.275) -> (-86, 9.275) projected
  line L90 (-86, 9.275) -> (-86, 28.975) projected
  line L91 (-82, -45.3889) -> (-76, -45.3889) projected
  line L92 (-76, -39.3889) -> (-82, -39.3889) projected
  line L93 (75.95, 28.975) -> (86, 28.975) projected
  line L94 (86, 28.975) -> (86, 9.275) projected
  line L95 (86, 9.275) -> (75.95, 9.275) projected
  line L96 (75.95, 9.275) -> (75.95, 28.975) projected
  line L97 (-39, -45.3279) -> (-39, -44.2124) projected
  circle A47 centre (-24.1, -73.1) radius 1.2295 projected
  circle A48 centre (24.1, -24.9) radius 1.2295 projected
  circle A49 centre (-24.1, -24.9) radius 1.2295 projected
  circle A50 centre (24.1, -73.1) radius 1.2295 projected
  point P0 (0, 0)
  point P1 (7.5, 81.5)
  point P2 (13.5, 81.5)
  point P3 (-7.5, 81.5)
  point P4 (-13.5, 81.5)
  point P5 (-77, -75.5)
  point P6 (39, -44.2094)
  point P7 (-79, -67.8878)
  point P8 (-79, -66.4572)
  point P9 (22.5, 12.275)
  point P10 (22.5, 25.9125)
  point P11 (7.5, 81.5)
  point P12 (13.5, 81.5)
  point P13 (-7.5, 81.5)
  point P14 (-13.5, 81.5)
  dimension "d0" = 1
  dimension "d1" = 1
ref_plane "Work Plane2" through (-89, -40.3889, 33.5) normal (0, 0, 1) x (1, 0, 0)
extrude "Extrusion1" add sketch "Sketch1" along normal up to surface (33.5 mm away) contours L21 L73 L23 L16 L0 | L21 L22 L23 L73 | A23 | A24 | A28 | A30
sketch "Sketch2" plane through (22.5, 3.75, 0) normal (1, 0, 0) x (0, 0, -1)
  circle A0 centre (-17.375, 15.375) radius 6.75 projected
  circle A1 centre (-10.5, 57.25) radius 5.5 projected
  point P0 (0, -3.75)
  dimension "d8" = 11
extrude "Extrusion2" cut sketch "Sketch2" against normal up to next
sketch "Sketch3" plane through (16.5, 3.75, 0) normal (-1, 0, 0) x (0, 0, 1)
  circle A0 centre (23.4363, 30.1825) radius 2 projected
  point P0 (0, -3.75)
extrude "Extrusion3" cut sketch "Sketch3" against normal blind 5
ref_plane "Work Plane3" through (23.5, 3.75, 0) normal (1, 0, 0) x (0, 0, -1)
sketch "Sketch4" plane through (23.5, 3.75, 0) normal (1, 0, 0) x (0, 0, -1)
  circle A0 centre (-29.5, 80.75) radius 1.8 projected
  circle A1 centre (-3.5, 33.25) radius 1.8 projected
  circle A2 centre (-4, 80.75) radius 1.8 projected
  point P0 (0, -3.75)
hole "Hole1" at (23.5, 37, 3.5) at (23.5, 84.5, 4) at (23.5, 84.5, 29.5) direction (-1, 0, 0) diameter 3.6 end through all countersink diameter 6.2 countersink angle 90 clearance for "Countersunk Flat Head Screw ISO 2009/7046" size "M3" standard "ISO"
sketch "Sketch5" plane through (16.5, 3.75, 33.5) normal (0, 0, 1) x (1, 0, 0)
  circle A0 centre (-36, 5.8) radius 1.8 projected
  circle A1 centre (-36, 25.125) radius 1.8 projected
  circle A2 centre (-36, 43.55) radius 1.8 projected
  circle A3 centre (-35.9231, 71.0577) radius 1.8 projected
  circle A4 centre (-16.5, 45.3) radius 3.3 projected
  circle A5 centre (-16.5, 15.375) radius 3.3 projected
  circle A6 centre (-16.5, 70.95) radius 3.3 projected
  line L0 (-12, 2) -> (-21, 2) projected
  line L1 (-12, 84.75) -> (-12, 2) projected
  line L2 (-21, 84.75) -> (-12, 84.75) projected
  line L3 (-21, 2) -> (-21, 84.75) projected
  line L4 (-16.5, 2) -> (-16.5, 84.75)
  circle A7 centre (3, 5.8) radius 1.8
  circle A8 centre (3, 25.125) radius 1.8
  circle A9 centre (3, 43.55) radius 1.8
  circle A10 centre (2.9231, 71.0577) radius 1.8
  circle A11 centre (-16.5, 30.7161) radius 2.3 projected
  circle A12 centre (-16.5, 59.25) radius 2.3 projected
  point P0 (-16.5, -3.75)
hole "Hole2" at (19.5, 9.55, 33.5) at (19.5, 28.875, 33.5) at (19.5, 47.3, 33.5) at (19.4231, 74.8077, 33.5) direction (0, 0, -1) diameter 3.6 end through all countersink diameter 6.3 countersink angle 90 clearance for "Countersunk Flat Head Screw ISO 2009/7046" size "M3" standard "ISO"
sketch "Sketch7" plane through (16.5, 88.5, 0) normal (0, 1, 0) x (1, 0, 0)
  line L0 (0, -33.5) -> (6, -33.5) projected
  line L1 (6, 0) -> (6, -33.5) projected
  line L2 (6, 0) -> (0, 0) projected
  line L3 (0, 0) -> (0, -33.5) projected
  circle A0 centre (-16.5, -12.675) radius 2 projected
  circle A1 centre (-16.5, -20.825) radius 2 projected
  line L4 (-16.5, -20.825) -> (6, -20.825)
  line L5 (-16.5, -12.675) -> (6, -12.675)
  line L6 (6, -5) -> (6, -16) projected
  point P0 (-16.5, 0)
  point P1 (3, -20.825)
  point P2 (3, -12.675)
hole "Hole4" at (19.5, 88.5, 20.825) at (19.5, 88.5, 12.675) direction (0, -1, 0) diameter 4 depth 6 counterbore diameter 4.6 counterbore depth 1.5
sketch "Sketch8" plane through (19.5, 47.3, 33.5) normal (0, 0, 1) x (1, 0, 0)
  circle A0 centre (-39, -9.2125) radius 2.3 projected
  circle A1 centre (-39, 13.7) radius 2.3 projected
  arc A2 (3, 0.9605) -> (-3, 0.9605) centre (0, 0) ccw projected
  line L0 (3, 26.8331) -> (3, 0.9605) projected
  arc A3 (-3, 26.3338) -> (3, 26.8331) centre (-0.0769, 27.5077) ccw projected
  line L1 (-3, 0.9605) -> (-3, 26.3338) projected
  arc A4 (-3, -0.9605) -> (3, -0.9605) centre (0, 0) ccw projected
  line L2 (-3, -17.4645) -> (-3, -0.9605) projected
  arc A5 (3, -17.4645) -> (-3, -17.4645) centre (0, -18.425) ccw projected
  line L3 (3, -0.9605) -> (3, -17.4645) projected
  line L4 (-39, 13.7) -> (3, 13.7)
  line L5 (3, 19.2) -> (3, 8.2) projected
  line L6 (-39, -9.2125) -> (3, -9.2125)
  circle A6 centre (0, -18.425) radius 1.8 projected
  line L7 (0, -18.425) -> (-0.0769, 27.5077)
  point P0 (-19.5, -47.3)
  point P1 (-0.0538, 13.7)
  point P2 (-0.0154, -9.2125)
hole "Hole5" at (19.4462, 61, 33.5) at (19.4846, 38.0875, 33.5) direction (0, 0, -1) diameter 4 depth 6 counterbore diameter 4.6 counterbore depth 1.5
sketch "Sketch9" plane through (16.5, 3.75, 0) normal (0, -1, 0) x (1, 0, 0)
  line L0 (0, 0) -> (0, 33.5) projected
  line L1 (0, 0) -> (6, 0) projected
  line L2 (6, 0) -> (6, 33.5) projected
  line L3 (6, 33.5) -> (0, 33.5) projected
  point P0 (-16.5, 0)
extrude "Extrusion4" cut sketch "Sketch9" against normal blind 2
properties part number "left_gear_holder" material "Nylon 6/6"
